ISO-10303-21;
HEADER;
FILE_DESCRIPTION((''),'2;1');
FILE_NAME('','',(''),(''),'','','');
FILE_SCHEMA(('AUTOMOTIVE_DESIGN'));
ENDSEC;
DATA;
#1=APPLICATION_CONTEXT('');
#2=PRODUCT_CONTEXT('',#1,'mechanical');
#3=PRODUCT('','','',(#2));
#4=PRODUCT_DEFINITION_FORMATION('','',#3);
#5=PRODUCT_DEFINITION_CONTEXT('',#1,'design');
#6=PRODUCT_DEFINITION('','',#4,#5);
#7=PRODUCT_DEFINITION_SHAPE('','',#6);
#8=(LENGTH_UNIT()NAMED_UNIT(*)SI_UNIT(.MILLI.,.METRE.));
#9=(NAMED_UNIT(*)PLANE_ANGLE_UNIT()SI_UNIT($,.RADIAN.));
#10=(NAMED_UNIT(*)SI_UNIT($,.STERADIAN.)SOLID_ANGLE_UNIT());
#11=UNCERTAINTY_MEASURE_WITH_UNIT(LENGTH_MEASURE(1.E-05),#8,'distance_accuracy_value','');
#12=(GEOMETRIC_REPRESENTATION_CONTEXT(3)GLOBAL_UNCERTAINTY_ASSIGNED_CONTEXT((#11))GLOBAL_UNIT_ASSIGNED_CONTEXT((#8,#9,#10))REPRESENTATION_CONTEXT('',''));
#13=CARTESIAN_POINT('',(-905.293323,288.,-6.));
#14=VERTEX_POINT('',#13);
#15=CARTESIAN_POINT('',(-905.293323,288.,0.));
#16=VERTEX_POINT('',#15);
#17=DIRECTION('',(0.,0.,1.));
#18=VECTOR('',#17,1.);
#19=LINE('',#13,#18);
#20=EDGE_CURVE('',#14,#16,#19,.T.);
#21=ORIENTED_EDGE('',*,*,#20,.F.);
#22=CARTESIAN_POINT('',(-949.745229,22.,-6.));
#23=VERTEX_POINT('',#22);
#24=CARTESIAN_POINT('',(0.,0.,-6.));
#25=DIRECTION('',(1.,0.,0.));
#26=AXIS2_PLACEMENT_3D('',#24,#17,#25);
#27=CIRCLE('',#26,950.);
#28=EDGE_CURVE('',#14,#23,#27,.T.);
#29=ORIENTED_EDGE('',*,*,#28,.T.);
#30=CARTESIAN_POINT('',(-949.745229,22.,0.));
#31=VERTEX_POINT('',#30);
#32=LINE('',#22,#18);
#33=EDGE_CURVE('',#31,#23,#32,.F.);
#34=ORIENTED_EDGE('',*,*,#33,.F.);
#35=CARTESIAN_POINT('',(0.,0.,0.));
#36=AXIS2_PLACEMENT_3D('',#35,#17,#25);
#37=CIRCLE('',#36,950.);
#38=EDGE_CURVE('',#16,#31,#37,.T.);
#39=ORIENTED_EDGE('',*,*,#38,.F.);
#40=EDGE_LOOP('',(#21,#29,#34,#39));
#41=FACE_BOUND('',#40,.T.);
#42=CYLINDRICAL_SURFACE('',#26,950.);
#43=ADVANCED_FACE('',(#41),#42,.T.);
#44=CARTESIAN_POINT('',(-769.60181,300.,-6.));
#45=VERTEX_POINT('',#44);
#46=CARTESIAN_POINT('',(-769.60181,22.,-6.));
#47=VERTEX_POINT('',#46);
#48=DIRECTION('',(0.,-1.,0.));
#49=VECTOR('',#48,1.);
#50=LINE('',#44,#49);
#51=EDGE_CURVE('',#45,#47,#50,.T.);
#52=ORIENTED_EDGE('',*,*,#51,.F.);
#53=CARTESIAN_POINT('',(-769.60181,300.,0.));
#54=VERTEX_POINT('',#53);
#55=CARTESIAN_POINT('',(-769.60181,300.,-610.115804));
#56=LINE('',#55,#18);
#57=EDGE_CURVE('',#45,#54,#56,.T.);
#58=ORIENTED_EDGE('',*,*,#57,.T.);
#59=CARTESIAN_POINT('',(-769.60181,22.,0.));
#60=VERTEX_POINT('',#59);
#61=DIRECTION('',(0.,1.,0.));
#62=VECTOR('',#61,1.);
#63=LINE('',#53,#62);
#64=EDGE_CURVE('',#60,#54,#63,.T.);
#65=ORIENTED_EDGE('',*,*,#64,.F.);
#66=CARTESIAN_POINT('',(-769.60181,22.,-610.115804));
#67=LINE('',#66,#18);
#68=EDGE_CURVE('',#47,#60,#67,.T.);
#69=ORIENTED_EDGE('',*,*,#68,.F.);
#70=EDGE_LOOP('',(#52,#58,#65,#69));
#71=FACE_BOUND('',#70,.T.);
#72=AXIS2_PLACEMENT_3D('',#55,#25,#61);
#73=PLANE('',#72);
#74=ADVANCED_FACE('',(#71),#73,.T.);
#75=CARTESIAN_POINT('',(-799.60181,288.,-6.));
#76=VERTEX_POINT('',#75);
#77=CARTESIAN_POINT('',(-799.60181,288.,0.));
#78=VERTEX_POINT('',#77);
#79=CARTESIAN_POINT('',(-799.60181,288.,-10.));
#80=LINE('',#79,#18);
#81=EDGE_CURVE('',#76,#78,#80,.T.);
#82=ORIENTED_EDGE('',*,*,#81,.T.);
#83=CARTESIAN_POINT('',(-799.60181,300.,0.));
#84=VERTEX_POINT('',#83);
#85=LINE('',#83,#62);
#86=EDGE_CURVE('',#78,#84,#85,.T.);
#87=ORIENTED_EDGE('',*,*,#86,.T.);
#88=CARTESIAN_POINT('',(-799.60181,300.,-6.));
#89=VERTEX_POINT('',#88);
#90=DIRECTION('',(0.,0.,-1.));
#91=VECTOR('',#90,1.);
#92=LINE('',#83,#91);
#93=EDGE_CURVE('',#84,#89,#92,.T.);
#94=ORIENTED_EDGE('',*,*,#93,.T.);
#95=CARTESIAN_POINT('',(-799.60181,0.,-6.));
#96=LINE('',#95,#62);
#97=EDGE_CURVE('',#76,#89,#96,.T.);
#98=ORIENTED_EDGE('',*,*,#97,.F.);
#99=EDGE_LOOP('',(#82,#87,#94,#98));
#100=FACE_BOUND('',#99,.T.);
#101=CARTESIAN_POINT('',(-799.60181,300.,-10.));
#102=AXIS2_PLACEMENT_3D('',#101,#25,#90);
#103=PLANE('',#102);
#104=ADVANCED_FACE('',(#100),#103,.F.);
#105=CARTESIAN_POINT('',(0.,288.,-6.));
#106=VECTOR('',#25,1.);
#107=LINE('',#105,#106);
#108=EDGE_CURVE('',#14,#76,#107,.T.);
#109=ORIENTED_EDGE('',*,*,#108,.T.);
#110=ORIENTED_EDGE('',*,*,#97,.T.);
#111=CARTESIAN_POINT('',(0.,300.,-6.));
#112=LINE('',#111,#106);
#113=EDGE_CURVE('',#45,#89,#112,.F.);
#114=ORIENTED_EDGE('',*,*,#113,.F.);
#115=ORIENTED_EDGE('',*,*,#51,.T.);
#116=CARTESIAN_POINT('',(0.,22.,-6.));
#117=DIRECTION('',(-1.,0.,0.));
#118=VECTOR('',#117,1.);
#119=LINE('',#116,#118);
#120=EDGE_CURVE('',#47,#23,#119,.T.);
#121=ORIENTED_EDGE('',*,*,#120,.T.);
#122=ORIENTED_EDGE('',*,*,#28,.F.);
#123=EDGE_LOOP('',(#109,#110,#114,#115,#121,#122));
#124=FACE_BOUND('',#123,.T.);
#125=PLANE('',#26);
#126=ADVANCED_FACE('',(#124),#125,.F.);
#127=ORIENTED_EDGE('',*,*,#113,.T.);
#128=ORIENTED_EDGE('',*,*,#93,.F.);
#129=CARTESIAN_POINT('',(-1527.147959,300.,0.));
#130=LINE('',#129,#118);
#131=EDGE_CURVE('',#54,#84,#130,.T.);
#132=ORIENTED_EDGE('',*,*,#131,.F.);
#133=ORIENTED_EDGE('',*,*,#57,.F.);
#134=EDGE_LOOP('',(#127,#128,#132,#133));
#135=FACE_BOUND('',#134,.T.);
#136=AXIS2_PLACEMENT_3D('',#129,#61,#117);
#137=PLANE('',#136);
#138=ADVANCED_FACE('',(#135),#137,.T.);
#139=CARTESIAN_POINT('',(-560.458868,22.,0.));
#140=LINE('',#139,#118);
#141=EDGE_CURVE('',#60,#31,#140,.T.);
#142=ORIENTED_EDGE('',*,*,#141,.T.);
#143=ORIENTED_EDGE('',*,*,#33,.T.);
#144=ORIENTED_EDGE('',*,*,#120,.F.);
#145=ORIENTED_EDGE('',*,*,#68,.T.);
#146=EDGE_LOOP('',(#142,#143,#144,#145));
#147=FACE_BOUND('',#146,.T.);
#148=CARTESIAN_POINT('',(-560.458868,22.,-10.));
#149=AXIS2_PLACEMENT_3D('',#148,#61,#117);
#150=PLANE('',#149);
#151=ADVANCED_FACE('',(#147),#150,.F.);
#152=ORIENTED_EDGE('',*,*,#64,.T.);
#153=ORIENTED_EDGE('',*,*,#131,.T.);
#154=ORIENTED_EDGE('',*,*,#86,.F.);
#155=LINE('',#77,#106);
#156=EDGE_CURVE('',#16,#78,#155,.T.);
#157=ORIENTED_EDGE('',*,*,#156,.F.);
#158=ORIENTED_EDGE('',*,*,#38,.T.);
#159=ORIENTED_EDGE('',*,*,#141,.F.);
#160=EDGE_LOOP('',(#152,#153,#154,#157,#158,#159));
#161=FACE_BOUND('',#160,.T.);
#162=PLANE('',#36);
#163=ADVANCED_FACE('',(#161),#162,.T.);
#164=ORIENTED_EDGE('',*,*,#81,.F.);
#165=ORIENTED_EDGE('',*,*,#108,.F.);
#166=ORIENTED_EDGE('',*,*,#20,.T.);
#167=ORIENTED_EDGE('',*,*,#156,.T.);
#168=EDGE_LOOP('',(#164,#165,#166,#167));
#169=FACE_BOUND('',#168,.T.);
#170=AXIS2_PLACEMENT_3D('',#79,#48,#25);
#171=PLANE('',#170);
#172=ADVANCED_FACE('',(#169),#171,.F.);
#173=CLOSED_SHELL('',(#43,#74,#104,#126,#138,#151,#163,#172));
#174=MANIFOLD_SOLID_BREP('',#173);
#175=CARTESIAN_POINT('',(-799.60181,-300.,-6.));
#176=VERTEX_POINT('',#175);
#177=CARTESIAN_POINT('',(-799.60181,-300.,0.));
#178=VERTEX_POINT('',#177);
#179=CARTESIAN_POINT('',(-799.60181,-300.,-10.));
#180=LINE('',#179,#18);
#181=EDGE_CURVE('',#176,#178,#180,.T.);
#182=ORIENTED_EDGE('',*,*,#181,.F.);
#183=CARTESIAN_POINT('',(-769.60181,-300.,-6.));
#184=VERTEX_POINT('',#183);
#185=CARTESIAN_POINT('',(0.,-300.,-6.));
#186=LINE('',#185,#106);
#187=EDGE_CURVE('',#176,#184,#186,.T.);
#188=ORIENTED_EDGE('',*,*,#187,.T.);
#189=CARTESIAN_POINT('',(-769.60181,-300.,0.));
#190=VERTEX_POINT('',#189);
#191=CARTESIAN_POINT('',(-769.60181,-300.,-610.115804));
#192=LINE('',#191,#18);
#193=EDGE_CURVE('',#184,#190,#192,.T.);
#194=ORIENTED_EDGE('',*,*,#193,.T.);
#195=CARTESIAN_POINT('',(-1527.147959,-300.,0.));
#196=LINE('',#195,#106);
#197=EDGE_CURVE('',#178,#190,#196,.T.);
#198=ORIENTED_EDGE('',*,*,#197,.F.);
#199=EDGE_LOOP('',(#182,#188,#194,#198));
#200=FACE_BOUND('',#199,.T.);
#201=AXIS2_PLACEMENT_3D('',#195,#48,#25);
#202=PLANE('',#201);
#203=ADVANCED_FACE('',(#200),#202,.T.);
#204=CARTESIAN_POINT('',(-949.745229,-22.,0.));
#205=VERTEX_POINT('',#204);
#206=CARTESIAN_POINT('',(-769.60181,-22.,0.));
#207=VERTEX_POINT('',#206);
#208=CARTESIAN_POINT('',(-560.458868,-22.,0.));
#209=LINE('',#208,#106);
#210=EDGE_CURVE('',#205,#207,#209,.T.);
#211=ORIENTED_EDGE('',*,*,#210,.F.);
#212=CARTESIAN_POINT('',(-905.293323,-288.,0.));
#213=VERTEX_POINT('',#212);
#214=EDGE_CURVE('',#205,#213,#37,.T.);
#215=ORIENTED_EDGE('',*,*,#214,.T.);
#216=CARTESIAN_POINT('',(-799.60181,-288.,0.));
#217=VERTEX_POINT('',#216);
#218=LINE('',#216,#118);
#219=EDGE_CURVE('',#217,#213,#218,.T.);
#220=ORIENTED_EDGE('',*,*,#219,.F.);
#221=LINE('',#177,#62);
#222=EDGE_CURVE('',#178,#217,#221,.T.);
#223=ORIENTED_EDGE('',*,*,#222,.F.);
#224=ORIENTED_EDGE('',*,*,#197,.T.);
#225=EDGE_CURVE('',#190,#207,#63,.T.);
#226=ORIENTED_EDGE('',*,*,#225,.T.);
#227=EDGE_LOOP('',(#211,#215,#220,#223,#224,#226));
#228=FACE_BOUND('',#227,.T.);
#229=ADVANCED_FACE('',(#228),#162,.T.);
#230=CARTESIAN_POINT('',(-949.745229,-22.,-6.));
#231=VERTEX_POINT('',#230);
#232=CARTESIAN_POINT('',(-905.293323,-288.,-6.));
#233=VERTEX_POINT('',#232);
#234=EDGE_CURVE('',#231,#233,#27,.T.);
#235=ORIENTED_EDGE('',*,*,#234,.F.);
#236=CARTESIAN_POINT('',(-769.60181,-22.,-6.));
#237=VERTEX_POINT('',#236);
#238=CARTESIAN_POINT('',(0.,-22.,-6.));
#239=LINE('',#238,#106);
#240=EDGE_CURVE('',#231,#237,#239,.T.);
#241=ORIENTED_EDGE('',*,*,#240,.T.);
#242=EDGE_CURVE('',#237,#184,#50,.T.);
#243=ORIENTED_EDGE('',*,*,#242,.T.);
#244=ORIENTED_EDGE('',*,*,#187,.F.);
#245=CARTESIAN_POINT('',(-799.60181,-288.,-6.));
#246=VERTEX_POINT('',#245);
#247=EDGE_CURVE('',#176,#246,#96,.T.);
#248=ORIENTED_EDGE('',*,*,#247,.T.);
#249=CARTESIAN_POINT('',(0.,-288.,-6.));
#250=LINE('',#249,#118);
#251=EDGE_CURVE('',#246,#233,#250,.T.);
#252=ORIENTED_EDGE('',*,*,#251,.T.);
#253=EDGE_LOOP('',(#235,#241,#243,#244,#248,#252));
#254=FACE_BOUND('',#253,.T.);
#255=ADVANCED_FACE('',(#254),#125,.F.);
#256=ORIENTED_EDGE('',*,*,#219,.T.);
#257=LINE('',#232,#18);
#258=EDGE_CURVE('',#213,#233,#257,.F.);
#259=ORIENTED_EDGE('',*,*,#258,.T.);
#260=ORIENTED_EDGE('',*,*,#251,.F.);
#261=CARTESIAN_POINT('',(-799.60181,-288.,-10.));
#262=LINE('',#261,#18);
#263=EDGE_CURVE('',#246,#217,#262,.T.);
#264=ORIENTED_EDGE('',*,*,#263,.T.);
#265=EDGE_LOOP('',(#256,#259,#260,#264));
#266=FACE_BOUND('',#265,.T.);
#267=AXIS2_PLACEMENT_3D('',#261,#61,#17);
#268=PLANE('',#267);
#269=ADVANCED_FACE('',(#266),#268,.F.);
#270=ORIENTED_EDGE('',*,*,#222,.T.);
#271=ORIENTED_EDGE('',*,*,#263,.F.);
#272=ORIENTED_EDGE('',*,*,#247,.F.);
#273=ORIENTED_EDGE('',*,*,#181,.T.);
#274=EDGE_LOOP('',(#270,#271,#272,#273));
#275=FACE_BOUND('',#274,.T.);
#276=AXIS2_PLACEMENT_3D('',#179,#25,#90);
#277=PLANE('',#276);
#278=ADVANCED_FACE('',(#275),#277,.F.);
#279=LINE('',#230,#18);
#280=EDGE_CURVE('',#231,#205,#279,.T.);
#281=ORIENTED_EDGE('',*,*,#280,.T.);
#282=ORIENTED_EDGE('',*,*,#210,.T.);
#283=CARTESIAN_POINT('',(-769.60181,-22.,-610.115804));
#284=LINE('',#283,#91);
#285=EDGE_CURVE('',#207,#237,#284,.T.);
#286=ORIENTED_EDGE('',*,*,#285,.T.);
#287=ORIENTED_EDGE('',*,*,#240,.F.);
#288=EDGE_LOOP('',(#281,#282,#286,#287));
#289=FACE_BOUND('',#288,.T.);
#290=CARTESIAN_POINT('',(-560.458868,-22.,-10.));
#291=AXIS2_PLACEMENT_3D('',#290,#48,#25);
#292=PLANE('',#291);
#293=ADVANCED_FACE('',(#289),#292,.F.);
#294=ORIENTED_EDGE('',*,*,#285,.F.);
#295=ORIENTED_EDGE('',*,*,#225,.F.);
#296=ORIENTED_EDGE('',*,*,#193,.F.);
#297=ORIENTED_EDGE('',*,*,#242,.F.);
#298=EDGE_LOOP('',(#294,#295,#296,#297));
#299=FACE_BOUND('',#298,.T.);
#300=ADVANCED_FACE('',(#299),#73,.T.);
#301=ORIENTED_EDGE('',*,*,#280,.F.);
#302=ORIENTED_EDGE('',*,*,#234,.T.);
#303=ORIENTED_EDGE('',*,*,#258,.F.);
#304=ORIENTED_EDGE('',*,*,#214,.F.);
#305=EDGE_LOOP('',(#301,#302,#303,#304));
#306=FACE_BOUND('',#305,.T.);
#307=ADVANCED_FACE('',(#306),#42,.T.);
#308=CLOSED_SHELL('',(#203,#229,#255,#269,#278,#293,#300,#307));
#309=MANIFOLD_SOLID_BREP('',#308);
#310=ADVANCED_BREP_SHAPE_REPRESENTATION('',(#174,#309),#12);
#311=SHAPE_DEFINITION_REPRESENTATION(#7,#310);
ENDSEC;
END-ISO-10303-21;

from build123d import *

# Parameters (mm, degrees)
SKETCH1_R           = 950
SKETCH1_R_2         = 840
BASE_FLANGE1_DEPTH  = 6
SKETCH6_W           = 3903.37574265
SKETCH6_H           = 2501.66331226
SKETCH6_W_2         = 2732.981099596
SKETCH6_H_2         = 600
CUT_EXTRUDE1_DEPTH  = 10
BOSS_EXTRUDE1_DEPTH = 6
SKETCH8_W           = 418.285884571
SKETCH8_H           = 44
CUT_EXTRUDE2_DEPTH  = 10
SKETCH13_W          = 115.405661545
SKETCH13_H          = 12
CUT_EXTRUDE3_DEPTH  = 10
SKETCH14_W          = 124.238303048
SKETCH14_H          = 12
CUT_EXTRUDE4_DEPTH  = 10


# Sheet-metal steps are written as plain solids
with BuildPart() as part:
    # Sketch1 → Base-Flange1 (new body)
    with BuildSketch(Plane.XY):
        Circle(SKETCH1_R)
        Circle(SKETCH1_R_2, mode=Mode.SUBTRACT)
    extrude(amount=-BASE_FLANGE1_DEPTH)

    # Sketch6 → Cut-Extrude1 (cut)
    with BuildSketch(Plane.XY):
        Rectangle(SKETCH6_W, SKETCH6_H)
        with Locations((-160.657409421, 0)):
            Rectangle(SKETCH6_W_2, SKETCH6_H_2, mode=Mode.SUBTRACT)
    extrude(amount=-CUT_EXTRUDE1_DEPTH, mode=Mode.SUBTRACT)


with BuildPart() as cut_extrude1_kept_piece:
    # of the separate pieces the step leaves, the one the design keeps (cut_extrude1_pieces_kept)
    add(part.part.solids().sort_by_distance((-901.387818866, 300, 0))[0])

    # Sketch7 → Boss-Extrude1 (add)
    with BuildSketch(Plane.XY):
        with BuildLine():
            Line((-784.601809837, 300), (-769.601809837, 300))
            Line((-769.601809837, 300), (-769.601809837, -300))
            Line((-769.601809837, -300), (-784.601809837, -300))
            ThreePointArc((-784.601809837, -300), (-840, 0), (-784.601809837, 300))
        make_face()
    extrude(amount=-BOSS_EXTRUDE1_DEPTH)

    # Sketch8 → Cut-Extrude2 (cut)
    with BuildSketch(Plane.XY):
        with Locations((-769.601809838, 0)):
            Rectangle(SKETCH8_W, SKETCH8_H)
    extrude(amount=-CUT_EXTRUDE2_DEPTH, mode=Mode.SUBTRACT)


with BuildPart() as cut_extrude2_piece_1:
    # of the separate pieces the step leaves, piece 1, a body of its own (cut_extrude2_pieces)
    add(cut_extrude1_kept_piece.part.solids().sort_by_distance((-949.745228996, -22, 0))[0])

    # Sketch14 → Cut-Extrude4 (cut)
    with BuildSketch(Plane.XY):
        with Locations((-861.720961361, -294)):
            Rectangle(SKETCH14_W, SKETCH14_H)
    extrude(amount=-CUT_EXTRUDE4_DEPTH, mode=Mode.SUBTRACT)


with BuildPart() as cut_extrude2_piece_2:
    # of the separate pieces the step leaves, piece 2, a body of its own (cut_extrude2_pieces)
    add(cut_extrude1_kept_piece.part.solids().sort_by_distance((-901.387818866, 300, 0))[0])

    # Sketch13 → Cut-Extrude3 (cut)
    with BuildSketch(Plane.XY):
        with Locations((-857.304640609, 294)):
            Rectangle(SKETCH13_W, SKETCH13_H)
    extrude(amount=-CUT_EXTRUDE3_DEPTH, mode=Mode.SUBTRACT)


solid = Compound([cut_extrude2_piece_1.part, cut_extrude2_piece_2.part])
